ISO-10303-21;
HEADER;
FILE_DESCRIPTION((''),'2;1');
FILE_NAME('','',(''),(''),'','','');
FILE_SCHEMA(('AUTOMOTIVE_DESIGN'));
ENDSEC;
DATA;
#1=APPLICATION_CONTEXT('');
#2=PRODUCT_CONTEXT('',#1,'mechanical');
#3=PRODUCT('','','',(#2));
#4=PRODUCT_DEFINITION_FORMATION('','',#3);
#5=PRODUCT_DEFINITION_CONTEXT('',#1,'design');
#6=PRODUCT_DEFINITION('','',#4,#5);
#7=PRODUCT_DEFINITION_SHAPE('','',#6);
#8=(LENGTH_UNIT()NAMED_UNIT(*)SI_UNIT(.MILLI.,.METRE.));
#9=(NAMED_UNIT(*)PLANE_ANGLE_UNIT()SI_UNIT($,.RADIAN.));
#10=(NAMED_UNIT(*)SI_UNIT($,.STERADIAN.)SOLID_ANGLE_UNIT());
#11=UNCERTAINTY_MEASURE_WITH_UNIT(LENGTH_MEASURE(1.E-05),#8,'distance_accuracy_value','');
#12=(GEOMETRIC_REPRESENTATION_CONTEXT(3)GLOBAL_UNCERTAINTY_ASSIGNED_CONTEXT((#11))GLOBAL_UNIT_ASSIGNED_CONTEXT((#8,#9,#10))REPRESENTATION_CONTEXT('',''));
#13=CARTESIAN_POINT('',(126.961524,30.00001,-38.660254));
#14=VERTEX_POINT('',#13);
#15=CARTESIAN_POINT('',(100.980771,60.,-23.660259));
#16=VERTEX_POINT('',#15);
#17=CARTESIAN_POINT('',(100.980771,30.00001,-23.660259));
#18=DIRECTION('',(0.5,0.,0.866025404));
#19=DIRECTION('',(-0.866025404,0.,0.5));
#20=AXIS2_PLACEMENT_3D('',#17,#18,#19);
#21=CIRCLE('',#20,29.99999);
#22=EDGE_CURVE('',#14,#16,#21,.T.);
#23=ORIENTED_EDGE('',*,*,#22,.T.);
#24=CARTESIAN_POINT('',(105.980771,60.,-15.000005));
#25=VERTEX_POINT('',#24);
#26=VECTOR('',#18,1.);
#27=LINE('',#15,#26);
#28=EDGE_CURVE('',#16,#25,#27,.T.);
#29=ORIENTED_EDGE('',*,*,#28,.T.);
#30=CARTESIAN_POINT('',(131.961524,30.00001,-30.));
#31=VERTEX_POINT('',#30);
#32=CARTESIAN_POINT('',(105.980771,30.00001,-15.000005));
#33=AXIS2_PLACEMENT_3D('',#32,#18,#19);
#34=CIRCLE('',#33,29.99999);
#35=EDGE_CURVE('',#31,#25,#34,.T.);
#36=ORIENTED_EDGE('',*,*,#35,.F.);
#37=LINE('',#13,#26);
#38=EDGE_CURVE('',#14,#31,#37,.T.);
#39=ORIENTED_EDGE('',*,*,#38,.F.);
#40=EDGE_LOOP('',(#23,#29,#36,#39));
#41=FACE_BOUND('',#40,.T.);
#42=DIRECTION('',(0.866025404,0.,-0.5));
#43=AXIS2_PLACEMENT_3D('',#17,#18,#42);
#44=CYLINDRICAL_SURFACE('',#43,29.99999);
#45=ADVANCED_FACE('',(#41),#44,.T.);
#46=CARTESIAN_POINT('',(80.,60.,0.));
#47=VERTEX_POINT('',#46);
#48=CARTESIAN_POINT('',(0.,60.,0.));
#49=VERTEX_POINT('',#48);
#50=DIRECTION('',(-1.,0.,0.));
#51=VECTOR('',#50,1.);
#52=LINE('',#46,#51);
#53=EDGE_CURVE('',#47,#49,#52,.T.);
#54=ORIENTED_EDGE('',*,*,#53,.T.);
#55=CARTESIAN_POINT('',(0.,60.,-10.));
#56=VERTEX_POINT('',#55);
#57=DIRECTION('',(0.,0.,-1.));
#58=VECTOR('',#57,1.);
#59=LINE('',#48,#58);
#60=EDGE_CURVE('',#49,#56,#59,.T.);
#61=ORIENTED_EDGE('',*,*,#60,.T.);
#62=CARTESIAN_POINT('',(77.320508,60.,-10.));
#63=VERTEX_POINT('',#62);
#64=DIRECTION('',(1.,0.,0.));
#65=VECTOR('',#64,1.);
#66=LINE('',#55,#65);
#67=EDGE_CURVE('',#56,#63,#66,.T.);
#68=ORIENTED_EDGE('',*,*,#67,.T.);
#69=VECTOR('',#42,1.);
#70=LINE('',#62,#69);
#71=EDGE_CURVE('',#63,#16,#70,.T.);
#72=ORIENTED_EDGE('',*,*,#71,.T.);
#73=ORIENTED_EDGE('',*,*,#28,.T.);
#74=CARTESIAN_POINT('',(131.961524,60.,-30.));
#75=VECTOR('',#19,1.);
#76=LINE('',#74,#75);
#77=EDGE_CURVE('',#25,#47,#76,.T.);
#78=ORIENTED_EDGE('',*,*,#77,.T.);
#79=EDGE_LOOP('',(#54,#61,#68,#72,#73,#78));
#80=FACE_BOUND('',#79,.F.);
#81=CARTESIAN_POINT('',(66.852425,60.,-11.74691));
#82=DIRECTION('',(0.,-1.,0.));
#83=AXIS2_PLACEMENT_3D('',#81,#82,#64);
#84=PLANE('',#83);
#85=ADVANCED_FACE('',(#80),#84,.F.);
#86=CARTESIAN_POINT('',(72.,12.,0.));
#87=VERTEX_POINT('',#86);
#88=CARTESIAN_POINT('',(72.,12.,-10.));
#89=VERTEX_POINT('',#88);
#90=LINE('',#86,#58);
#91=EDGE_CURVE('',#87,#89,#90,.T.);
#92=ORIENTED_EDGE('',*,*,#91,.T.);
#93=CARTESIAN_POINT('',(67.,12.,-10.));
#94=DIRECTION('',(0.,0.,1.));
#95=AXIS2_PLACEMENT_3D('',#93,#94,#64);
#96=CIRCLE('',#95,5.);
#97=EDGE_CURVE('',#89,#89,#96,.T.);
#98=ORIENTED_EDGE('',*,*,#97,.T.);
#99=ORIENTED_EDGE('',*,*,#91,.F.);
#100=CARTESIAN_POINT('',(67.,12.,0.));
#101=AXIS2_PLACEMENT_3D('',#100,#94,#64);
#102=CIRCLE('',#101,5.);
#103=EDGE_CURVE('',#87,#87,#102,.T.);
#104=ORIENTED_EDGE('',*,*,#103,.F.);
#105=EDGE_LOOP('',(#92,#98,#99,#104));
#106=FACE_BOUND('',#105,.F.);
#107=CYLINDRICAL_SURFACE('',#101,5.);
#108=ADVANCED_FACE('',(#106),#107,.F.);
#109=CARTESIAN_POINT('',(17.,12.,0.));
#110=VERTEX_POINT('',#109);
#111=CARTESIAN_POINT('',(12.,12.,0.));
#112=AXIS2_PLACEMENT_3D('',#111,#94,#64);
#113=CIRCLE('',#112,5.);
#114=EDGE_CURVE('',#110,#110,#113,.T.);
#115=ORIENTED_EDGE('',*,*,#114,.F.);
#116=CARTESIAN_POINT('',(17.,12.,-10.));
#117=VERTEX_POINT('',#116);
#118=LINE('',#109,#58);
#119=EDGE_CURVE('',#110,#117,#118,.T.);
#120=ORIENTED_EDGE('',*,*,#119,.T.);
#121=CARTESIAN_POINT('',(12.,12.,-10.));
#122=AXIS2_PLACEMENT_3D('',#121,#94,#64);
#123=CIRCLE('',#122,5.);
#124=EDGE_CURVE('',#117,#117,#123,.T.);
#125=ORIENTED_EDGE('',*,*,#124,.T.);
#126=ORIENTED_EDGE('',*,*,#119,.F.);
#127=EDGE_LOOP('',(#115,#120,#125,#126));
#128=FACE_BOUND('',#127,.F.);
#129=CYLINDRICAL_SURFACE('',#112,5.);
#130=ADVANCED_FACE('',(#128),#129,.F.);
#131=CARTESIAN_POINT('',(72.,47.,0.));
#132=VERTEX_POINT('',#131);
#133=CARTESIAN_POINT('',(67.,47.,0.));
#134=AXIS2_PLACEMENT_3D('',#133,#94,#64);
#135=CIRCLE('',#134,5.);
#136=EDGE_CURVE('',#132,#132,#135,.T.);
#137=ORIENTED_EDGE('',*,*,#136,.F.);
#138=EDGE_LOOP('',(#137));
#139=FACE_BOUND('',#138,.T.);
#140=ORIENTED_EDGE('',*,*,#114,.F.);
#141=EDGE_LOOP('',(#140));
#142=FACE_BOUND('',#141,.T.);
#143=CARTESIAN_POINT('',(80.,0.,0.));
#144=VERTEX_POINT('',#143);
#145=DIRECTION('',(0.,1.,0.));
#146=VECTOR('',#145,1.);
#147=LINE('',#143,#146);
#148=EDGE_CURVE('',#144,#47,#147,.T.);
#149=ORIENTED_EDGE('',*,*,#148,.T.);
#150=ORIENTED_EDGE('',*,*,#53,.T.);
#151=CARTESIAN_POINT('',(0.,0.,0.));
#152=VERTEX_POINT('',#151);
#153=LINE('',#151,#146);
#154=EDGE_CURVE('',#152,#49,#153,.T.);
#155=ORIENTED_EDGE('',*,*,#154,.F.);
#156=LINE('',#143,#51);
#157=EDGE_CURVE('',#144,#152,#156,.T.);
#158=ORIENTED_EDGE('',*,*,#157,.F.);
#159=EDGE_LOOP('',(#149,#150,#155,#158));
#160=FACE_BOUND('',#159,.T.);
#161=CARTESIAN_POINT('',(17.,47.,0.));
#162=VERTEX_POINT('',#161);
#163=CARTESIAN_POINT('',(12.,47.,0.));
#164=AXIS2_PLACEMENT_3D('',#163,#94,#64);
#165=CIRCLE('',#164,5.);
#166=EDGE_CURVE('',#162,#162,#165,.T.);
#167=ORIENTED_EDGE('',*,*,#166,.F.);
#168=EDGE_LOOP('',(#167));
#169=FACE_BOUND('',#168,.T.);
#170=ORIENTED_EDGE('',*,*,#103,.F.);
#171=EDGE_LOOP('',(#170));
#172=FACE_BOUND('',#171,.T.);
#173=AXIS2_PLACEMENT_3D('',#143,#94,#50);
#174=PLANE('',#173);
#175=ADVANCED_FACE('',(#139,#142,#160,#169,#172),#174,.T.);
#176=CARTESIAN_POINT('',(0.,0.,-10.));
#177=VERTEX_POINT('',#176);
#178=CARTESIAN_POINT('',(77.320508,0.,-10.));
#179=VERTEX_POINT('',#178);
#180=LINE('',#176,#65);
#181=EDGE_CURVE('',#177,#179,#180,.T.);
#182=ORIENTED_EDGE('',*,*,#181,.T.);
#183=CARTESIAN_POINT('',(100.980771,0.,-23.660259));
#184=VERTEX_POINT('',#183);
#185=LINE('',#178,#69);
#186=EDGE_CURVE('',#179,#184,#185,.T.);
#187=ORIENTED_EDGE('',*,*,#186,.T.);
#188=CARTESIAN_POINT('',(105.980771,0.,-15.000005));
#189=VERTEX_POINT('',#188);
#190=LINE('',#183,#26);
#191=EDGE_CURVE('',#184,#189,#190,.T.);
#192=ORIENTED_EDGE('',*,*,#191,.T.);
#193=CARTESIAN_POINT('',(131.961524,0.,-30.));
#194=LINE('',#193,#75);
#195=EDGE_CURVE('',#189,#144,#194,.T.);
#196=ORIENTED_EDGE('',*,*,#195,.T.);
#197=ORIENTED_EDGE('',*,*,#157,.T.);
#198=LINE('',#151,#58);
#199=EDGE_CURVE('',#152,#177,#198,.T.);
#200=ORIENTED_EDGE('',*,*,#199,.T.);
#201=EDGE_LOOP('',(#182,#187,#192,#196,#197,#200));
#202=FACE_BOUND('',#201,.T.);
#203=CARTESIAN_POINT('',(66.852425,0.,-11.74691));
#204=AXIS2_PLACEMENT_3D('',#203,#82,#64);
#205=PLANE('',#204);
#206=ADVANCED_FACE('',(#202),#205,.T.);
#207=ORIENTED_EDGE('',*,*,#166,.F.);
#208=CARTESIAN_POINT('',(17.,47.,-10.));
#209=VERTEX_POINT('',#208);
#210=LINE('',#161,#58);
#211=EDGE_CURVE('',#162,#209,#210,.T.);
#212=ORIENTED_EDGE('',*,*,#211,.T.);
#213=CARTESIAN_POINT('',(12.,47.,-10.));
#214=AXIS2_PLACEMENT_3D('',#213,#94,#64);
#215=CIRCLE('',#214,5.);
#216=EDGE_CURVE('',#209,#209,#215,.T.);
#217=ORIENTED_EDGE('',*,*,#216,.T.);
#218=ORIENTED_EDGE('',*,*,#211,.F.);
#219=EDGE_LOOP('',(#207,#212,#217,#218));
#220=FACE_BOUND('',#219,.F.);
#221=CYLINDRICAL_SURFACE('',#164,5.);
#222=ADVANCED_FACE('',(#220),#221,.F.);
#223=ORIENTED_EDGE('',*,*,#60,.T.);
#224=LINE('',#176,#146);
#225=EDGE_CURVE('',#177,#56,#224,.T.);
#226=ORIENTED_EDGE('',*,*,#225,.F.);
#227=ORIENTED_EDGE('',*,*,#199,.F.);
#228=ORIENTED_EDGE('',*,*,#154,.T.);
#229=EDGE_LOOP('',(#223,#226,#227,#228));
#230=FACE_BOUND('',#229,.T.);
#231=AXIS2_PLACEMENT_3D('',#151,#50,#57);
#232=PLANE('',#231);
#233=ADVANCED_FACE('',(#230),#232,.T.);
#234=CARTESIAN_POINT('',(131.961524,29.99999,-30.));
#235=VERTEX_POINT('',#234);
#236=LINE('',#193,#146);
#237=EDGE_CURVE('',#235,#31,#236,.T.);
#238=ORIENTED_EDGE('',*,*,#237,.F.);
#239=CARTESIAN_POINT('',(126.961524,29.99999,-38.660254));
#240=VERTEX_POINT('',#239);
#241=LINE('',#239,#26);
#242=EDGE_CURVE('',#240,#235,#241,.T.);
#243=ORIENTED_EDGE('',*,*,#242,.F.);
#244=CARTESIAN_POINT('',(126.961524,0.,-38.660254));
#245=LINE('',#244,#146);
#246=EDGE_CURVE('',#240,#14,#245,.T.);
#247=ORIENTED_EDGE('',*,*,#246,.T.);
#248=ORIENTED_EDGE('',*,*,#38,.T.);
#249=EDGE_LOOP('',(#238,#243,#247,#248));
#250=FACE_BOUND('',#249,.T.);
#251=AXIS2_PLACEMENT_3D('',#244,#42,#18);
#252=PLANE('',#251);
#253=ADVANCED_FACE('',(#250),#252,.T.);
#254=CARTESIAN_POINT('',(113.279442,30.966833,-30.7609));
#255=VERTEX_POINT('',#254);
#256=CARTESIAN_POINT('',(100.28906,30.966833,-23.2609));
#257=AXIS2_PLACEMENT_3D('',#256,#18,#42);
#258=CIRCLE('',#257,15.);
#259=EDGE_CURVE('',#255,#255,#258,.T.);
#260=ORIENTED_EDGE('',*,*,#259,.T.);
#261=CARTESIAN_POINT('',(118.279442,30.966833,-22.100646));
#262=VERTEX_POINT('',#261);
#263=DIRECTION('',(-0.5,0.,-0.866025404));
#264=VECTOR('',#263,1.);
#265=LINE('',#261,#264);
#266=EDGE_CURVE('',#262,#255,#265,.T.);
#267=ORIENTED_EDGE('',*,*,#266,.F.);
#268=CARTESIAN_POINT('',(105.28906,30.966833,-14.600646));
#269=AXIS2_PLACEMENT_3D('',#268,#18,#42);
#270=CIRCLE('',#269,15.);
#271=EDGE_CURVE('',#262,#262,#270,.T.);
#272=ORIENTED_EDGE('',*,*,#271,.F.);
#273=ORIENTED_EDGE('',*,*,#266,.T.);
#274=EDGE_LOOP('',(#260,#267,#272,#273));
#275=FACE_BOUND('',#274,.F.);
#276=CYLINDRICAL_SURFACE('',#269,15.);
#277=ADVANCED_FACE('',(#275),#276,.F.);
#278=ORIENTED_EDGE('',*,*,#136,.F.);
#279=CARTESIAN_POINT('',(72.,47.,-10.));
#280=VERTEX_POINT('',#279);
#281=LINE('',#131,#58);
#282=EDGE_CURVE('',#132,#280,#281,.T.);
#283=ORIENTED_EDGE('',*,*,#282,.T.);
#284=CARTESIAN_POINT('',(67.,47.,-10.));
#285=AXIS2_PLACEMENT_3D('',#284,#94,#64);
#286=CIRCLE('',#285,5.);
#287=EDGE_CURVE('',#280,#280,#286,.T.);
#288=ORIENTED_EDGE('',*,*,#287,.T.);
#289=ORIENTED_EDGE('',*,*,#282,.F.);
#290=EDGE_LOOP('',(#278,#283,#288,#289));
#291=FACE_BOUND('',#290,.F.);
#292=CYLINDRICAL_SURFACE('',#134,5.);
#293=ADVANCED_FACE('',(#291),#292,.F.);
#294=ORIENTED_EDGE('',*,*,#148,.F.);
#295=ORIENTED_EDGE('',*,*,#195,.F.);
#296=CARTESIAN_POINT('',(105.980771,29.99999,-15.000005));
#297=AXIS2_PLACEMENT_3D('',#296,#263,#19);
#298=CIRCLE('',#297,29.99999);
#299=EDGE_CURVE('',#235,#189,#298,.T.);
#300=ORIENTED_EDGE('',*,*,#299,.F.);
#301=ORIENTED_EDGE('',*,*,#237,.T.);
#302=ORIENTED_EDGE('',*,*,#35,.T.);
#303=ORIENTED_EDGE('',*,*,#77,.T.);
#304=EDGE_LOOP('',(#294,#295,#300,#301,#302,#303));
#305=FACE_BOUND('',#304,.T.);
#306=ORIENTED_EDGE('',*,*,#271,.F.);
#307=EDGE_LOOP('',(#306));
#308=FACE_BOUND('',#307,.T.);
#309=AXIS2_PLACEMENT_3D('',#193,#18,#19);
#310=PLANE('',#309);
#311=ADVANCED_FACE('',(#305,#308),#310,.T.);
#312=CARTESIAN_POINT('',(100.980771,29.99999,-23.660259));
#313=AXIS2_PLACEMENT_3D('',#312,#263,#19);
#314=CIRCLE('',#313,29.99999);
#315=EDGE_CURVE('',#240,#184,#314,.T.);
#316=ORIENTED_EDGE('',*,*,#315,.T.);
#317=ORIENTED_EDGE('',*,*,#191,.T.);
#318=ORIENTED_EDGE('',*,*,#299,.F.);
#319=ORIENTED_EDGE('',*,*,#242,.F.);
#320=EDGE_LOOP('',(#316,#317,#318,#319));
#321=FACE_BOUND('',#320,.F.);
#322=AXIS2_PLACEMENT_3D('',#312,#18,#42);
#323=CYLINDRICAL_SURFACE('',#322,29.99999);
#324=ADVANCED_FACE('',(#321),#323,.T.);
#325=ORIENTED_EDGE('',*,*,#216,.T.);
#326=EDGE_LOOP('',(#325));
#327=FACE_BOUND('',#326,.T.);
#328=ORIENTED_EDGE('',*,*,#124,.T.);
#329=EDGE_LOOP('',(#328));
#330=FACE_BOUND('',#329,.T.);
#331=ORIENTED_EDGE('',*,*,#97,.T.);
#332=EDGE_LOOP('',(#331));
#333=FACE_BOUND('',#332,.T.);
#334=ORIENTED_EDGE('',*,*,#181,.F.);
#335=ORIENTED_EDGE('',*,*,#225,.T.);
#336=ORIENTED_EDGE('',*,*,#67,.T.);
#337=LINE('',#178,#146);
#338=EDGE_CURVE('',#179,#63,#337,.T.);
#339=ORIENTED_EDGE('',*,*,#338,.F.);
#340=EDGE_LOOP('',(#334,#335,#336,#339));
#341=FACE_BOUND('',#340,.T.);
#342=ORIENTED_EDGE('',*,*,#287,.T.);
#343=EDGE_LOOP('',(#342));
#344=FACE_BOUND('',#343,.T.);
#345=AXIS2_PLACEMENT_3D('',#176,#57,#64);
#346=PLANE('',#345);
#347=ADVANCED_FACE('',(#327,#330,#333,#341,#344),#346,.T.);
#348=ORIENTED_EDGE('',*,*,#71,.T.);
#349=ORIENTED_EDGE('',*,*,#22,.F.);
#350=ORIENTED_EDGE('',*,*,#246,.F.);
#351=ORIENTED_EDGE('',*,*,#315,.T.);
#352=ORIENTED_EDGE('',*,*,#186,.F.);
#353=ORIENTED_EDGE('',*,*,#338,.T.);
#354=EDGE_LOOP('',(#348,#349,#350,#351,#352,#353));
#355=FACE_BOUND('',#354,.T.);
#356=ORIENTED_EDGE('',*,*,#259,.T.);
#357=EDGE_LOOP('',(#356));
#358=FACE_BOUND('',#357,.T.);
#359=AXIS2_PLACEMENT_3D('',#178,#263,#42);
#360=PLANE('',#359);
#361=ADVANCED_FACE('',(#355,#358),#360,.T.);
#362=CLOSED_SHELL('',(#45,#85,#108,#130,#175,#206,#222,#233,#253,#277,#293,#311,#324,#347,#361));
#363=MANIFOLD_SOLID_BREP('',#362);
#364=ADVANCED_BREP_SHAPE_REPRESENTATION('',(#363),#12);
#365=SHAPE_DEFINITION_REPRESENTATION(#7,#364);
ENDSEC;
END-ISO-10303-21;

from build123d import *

# Parameters (mm, degrees)
F1_DEPTH = 60
F2_R     = 29.99999
F3_R     = 15
F4_DEPTH = 78.3
F5_R     = 5
F6_DEPTH = 25


# Not quite as in the source:
# - a fillet or chamfer is up to 0.001 mm smaller than in the source, because OpenCascade refuses the exact size


with BuildPart() as f1:
    # F0 (on Front) → F1 (new body)
    with BuildSketch(Plane.XZ):
        Polygon((80, 0), (0, 0), (0, -10), (77.3205080757, -10), (126.9615242271, -38.6602540378), (131.9615242271, -30), align=None)
    extrude(amount=-F1_DEPTH)

    # F2 (radius 30 in the source; OpenCascade refuses exactly that, so slightly less here)
    f2_edges = [f1.edges().sort_by_distance(p)[0] for p in [
        (129.461524, 60, -34.330127),
        (129.461524, 0, -34.330127),
    ]]
    fillet(f2_edges, radius=F2_R)

    # F3 (on face) → F4 (cut)
    with BuildSketch(Plane(origin=(20, 0, 34.6410161514), x_dir=(0.8660254038, 0, -0.5), z_dir=(0.5, 0, 0.8660254038))):
        with Locations((98.4833240509, 30.9668332338)):
            Circle(F3_R)
    extrude(amount=-F4_DEPTH, mode=Mode.SUBTRACT)

    # F5 (on face) → F6 (cut)
    with BuildSketch(Plane.XY):
        with Locations((12, 47)):
            Circle(F5_R)
        with Locations((12, 12)):
            Circle(F5_R)
        with Locations((67, 12)):
            Circle(F5_R)
        with Locations((67, 47)):
            Circle(F5_R)
    extrude(amount=-F6_DEPTH, mode=Mode.SUBTRACT)


solid = f1.part
